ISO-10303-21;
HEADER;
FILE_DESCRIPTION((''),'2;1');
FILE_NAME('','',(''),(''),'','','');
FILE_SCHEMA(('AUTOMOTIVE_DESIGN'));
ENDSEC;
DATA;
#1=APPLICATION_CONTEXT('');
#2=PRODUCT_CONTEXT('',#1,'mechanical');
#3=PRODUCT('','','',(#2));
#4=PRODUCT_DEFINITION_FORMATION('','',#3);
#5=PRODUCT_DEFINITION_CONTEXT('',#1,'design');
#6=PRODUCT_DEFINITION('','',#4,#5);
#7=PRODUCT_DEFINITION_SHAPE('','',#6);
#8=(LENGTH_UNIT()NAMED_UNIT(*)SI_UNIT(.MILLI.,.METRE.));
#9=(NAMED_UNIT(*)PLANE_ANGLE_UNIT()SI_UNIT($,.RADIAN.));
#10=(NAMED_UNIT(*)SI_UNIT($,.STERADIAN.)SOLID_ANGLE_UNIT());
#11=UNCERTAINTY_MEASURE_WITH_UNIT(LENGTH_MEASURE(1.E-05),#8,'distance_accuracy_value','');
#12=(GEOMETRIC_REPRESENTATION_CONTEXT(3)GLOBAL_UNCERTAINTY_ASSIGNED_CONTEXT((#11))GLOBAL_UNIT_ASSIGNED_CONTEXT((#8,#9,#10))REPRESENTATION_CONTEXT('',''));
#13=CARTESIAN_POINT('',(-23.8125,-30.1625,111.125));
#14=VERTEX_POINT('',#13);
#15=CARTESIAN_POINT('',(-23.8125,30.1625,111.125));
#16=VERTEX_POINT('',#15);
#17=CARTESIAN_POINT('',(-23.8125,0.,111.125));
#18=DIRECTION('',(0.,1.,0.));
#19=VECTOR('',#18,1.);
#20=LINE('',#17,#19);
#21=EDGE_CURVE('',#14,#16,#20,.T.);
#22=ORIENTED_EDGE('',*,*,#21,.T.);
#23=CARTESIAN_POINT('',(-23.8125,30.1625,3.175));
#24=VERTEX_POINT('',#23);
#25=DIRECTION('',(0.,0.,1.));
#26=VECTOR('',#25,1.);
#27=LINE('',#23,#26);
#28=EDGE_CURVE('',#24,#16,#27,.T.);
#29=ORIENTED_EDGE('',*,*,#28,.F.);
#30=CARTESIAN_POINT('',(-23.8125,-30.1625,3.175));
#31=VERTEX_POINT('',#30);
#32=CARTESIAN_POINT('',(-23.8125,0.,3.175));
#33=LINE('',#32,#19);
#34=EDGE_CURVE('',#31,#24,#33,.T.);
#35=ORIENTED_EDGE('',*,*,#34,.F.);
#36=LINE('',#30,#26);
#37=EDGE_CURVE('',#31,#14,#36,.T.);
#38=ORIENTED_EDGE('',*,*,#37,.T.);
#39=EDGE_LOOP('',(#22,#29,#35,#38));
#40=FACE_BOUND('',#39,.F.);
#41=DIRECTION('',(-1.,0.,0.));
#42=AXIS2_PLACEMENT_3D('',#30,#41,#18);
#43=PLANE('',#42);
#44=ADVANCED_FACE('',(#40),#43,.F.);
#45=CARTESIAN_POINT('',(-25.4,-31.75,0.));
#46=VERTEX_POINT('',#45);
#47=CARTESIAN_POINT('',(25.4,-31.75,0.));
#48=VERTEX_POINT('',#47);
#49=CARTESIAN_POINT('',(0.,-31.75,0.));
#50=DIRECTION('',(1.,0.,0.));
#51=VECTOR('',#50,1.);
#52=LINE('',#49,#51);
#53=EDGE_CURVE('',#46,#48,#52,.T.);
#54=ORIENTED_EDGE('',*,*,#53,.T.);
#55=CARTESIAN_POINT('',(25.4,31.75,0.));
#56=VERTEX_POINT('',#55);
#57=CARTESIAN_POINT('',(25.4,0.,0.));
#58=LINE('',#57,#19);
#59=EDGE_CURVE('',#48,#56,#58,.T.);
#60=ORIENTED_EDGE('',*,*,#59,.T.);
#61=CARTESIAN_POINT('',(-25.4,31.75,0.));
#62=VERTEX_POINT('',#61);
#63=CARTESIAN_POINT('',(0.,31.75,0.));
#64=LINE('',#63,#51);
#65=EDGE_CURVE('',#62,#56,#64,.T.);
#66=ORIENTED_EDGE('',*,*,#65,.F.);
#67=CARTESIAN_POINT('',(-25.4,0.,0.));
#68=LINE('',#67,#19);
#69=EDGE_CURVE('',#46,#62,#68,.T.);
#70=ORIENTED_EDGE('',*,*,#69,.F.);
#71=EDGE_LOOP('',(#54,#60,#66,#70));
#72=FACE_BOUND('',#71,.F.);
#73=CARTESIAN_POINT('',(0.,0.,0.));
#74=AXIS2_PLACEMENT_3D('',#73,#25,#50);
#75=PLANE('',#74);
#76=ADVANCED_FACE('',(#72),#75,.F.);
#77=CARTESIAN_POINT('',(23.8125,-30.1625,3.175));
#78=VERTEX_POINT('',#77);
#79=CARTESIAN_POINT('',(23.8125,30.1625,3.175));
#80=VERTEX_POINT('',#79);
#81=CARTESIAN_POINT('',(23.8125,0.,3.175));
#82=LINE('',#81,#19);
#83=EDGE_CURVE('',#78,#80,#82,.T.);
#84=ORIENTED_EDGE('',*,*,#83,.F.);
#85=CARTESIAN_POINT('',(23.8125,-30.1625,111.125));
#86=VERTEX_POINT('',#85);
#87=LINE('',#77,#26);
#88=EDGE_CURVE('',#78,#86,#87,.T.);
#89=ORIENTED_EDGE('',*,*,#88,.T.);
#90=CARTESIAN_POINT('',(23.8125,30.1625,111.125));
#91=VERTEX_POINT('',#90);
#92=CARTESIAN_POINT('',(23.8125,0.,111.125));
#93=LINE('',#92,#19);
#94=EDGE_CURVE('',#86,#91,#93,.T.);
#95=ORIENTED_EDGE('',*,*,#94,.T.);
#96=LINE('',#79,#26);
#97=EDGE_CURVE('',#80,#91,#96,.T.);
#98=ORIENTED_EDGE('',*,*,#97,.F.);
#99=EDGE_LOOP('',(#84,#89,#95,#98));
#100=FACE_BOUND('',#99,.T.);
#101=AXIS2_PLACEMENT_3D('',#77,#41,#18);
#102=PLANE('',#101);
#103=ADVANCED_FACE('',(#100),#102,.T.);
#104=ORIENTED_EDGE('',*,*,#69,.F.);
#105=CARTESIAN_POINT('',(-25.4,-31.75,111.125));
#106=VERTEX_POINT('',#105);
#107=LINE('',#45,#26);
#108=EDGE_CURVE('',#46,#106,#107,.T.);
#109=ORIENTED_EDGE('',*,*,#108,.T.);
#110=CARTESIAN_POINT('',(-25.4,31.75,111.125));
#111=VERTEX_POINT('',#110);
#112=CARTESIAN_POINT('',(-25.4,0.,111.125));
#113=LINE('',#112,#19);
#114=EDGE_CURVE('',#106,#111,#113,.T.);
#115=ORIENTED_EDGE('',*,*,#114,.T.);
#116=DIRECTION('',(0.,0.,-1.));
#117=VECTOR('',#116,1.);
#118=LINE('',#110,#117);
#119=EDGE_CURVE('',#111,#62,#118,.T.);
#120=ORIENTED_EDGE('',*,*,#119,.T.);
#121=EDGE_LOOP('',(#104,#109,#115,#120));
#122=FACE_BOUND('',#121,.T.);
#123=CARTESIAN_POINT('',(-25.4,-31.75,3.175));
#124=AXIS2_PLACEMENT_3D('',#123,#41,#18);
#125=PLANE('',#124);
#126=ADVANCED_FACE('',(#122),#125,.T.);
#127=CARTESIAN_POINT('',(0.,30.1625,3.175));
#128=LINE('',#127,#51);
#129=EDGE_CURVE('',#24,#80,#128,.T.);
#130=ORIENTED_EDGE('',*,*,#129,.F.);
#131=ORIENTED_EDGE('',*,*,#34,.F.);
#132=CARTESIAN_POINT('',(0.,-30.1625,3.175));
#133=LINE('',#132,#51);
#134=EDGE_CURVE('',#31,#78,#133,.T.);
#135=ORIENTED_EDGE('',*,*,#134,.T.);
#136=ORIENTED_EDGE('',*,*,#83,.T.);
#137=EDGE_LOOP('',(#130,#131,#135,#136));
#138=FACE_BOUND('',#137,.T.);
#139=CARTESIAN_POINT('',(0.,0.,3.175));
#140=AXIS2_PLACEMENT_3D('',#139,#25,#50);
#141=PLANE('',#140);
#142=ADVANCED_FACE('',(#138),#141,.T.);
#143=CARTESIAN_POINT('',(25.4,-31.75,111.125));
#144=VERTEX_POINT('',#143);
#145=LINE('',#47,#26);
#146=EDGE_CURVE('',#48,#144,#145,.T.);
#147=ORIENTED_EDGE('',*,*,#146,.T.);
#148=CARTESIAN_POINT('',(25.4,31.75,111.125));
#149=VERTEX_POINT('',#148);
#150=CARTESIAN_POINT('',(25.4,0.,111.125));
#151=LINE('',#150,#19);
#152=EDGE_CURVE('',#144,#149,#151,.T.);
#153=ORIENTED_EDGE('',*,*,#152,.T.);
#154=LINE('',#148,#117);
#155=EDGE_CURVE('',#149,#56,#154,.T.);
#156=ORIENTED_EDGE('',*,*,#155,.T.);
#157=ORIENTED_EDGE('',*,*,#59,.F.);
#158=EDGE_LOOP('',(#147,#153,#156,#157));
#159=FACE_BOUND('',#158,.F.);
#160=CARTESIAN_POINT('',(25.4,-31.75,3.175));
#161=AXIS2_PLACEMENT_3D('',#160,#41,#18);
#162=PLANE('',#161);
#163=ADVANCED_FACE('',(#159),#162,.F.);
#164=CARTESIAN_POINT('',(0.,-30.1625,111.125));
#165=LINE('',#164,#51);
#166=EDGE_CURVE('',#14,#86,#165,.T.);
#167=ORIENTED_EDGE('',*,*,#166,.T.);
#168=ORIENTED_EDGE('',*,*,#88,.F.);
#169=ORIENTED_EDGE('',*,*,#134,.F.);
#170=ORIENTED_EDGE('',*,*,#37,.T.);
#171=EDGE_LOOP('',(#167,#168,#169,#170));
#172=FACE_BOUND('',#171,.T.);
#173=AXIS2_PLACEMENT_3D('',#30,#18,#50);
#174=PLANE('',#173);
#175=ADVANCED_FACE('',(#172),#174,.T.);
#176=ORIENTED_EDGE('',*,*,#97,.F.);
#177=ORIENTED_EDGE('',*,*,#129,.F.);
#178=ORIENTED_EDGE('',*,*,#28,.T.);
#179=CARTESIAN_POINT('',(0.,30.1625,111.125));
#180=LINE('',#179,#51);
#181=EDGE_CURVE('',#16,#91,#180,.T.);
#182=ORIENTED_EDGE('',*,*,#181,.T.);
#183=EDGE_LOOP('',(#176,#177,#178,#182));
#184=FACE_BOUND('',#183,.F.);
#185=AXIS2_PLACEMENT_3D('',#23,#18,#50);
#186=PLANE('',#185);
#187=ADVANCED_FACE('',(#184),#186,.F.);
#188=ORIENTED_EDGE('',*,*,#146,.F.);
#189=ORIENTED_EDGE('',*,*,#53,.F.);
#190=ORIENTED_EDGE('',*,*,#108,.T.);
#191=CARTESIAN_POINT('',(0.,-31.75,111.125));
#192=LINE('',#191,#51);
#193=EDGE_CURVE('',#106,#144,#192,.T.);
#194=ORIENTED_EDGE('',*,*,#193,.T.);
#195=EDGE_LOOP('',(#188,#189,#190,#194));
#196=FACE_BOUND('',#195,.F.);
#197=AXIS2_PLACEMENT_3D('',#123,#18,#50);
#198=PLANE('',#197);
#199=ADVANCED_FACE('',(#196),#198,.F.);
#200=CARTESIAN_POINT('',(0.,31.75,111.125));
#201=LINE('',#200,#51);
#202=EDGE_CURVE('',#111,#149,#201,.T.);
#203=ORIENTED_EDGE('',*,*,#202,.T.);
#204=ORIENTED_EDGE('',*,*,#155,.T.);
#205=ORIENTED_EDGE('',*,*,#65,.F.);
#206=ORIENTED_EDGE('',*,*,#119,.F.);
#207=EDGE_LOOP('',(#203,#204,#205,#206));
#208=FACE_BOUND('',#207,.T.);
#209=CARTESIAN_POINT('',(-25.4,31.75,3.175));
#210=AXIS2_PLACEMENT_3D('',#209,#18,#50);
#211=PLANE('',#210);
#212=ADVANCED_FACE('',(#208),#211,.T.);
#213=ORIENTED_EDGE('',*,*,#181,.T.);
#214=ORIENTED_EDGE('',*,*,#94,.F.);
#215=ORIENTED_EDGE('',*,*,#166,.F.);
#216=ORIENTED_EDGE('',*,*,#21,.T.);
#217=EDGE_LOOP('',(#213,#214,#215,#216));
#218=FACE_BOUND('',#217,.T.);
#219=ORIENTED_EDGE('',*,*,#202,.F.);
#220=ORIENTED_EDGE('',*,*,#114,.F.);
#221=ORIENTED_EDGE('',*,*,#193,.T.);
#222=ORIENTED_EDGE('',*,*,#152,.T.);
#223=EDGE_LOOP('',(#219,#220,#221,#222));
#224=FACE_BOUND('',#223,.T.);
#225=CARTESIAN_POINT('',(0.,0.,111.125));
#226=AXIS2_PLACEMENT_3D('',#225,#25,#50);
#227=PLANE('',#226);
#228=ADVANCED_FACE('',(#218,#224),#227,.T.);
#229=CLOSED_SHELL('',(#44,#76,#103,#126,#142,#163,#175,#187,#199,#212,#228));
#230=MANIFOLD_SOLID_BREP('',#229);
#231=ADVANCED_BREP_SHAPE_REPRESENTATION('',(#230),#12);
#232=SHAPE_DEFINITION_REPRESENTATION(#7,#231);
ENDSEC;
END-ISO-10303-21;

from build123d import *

# Parameters (mm, degrees)
F0_W     = 50.8
F0_H     = 63.5
F1_DEPTH = 3.175
F2_W     = 50.8
F2_H     = 63.5
F2_W_2   = 47.625
F2_H_2   = 60.325
F3_DEPTH = 107.95


# Not quite as in the source:
# - a length typed as a fraction of an inch, garbled in the dataset ("3 / 203.2 mm" for 3/8 in), is restored


with BuildPart() as f1:
    # F0 (on Top) → F1 (new body)
    with BuildSketch(Plane.XY):
        Rectangle(F0_W, F0_H)
    extrude(amount=F1_DEPTH)

    # F2 (on face) → F3 (join)
    with BuildSketch(Plane.XY.offset(3.175)):
        Rectangle(F2_W, F2_H)
        Rectangle(F2_W_2, F2_H_2, mode=Mode.SUBTRACT)
    extrude(amount=F3_DEPTH)


solid = f1.part
